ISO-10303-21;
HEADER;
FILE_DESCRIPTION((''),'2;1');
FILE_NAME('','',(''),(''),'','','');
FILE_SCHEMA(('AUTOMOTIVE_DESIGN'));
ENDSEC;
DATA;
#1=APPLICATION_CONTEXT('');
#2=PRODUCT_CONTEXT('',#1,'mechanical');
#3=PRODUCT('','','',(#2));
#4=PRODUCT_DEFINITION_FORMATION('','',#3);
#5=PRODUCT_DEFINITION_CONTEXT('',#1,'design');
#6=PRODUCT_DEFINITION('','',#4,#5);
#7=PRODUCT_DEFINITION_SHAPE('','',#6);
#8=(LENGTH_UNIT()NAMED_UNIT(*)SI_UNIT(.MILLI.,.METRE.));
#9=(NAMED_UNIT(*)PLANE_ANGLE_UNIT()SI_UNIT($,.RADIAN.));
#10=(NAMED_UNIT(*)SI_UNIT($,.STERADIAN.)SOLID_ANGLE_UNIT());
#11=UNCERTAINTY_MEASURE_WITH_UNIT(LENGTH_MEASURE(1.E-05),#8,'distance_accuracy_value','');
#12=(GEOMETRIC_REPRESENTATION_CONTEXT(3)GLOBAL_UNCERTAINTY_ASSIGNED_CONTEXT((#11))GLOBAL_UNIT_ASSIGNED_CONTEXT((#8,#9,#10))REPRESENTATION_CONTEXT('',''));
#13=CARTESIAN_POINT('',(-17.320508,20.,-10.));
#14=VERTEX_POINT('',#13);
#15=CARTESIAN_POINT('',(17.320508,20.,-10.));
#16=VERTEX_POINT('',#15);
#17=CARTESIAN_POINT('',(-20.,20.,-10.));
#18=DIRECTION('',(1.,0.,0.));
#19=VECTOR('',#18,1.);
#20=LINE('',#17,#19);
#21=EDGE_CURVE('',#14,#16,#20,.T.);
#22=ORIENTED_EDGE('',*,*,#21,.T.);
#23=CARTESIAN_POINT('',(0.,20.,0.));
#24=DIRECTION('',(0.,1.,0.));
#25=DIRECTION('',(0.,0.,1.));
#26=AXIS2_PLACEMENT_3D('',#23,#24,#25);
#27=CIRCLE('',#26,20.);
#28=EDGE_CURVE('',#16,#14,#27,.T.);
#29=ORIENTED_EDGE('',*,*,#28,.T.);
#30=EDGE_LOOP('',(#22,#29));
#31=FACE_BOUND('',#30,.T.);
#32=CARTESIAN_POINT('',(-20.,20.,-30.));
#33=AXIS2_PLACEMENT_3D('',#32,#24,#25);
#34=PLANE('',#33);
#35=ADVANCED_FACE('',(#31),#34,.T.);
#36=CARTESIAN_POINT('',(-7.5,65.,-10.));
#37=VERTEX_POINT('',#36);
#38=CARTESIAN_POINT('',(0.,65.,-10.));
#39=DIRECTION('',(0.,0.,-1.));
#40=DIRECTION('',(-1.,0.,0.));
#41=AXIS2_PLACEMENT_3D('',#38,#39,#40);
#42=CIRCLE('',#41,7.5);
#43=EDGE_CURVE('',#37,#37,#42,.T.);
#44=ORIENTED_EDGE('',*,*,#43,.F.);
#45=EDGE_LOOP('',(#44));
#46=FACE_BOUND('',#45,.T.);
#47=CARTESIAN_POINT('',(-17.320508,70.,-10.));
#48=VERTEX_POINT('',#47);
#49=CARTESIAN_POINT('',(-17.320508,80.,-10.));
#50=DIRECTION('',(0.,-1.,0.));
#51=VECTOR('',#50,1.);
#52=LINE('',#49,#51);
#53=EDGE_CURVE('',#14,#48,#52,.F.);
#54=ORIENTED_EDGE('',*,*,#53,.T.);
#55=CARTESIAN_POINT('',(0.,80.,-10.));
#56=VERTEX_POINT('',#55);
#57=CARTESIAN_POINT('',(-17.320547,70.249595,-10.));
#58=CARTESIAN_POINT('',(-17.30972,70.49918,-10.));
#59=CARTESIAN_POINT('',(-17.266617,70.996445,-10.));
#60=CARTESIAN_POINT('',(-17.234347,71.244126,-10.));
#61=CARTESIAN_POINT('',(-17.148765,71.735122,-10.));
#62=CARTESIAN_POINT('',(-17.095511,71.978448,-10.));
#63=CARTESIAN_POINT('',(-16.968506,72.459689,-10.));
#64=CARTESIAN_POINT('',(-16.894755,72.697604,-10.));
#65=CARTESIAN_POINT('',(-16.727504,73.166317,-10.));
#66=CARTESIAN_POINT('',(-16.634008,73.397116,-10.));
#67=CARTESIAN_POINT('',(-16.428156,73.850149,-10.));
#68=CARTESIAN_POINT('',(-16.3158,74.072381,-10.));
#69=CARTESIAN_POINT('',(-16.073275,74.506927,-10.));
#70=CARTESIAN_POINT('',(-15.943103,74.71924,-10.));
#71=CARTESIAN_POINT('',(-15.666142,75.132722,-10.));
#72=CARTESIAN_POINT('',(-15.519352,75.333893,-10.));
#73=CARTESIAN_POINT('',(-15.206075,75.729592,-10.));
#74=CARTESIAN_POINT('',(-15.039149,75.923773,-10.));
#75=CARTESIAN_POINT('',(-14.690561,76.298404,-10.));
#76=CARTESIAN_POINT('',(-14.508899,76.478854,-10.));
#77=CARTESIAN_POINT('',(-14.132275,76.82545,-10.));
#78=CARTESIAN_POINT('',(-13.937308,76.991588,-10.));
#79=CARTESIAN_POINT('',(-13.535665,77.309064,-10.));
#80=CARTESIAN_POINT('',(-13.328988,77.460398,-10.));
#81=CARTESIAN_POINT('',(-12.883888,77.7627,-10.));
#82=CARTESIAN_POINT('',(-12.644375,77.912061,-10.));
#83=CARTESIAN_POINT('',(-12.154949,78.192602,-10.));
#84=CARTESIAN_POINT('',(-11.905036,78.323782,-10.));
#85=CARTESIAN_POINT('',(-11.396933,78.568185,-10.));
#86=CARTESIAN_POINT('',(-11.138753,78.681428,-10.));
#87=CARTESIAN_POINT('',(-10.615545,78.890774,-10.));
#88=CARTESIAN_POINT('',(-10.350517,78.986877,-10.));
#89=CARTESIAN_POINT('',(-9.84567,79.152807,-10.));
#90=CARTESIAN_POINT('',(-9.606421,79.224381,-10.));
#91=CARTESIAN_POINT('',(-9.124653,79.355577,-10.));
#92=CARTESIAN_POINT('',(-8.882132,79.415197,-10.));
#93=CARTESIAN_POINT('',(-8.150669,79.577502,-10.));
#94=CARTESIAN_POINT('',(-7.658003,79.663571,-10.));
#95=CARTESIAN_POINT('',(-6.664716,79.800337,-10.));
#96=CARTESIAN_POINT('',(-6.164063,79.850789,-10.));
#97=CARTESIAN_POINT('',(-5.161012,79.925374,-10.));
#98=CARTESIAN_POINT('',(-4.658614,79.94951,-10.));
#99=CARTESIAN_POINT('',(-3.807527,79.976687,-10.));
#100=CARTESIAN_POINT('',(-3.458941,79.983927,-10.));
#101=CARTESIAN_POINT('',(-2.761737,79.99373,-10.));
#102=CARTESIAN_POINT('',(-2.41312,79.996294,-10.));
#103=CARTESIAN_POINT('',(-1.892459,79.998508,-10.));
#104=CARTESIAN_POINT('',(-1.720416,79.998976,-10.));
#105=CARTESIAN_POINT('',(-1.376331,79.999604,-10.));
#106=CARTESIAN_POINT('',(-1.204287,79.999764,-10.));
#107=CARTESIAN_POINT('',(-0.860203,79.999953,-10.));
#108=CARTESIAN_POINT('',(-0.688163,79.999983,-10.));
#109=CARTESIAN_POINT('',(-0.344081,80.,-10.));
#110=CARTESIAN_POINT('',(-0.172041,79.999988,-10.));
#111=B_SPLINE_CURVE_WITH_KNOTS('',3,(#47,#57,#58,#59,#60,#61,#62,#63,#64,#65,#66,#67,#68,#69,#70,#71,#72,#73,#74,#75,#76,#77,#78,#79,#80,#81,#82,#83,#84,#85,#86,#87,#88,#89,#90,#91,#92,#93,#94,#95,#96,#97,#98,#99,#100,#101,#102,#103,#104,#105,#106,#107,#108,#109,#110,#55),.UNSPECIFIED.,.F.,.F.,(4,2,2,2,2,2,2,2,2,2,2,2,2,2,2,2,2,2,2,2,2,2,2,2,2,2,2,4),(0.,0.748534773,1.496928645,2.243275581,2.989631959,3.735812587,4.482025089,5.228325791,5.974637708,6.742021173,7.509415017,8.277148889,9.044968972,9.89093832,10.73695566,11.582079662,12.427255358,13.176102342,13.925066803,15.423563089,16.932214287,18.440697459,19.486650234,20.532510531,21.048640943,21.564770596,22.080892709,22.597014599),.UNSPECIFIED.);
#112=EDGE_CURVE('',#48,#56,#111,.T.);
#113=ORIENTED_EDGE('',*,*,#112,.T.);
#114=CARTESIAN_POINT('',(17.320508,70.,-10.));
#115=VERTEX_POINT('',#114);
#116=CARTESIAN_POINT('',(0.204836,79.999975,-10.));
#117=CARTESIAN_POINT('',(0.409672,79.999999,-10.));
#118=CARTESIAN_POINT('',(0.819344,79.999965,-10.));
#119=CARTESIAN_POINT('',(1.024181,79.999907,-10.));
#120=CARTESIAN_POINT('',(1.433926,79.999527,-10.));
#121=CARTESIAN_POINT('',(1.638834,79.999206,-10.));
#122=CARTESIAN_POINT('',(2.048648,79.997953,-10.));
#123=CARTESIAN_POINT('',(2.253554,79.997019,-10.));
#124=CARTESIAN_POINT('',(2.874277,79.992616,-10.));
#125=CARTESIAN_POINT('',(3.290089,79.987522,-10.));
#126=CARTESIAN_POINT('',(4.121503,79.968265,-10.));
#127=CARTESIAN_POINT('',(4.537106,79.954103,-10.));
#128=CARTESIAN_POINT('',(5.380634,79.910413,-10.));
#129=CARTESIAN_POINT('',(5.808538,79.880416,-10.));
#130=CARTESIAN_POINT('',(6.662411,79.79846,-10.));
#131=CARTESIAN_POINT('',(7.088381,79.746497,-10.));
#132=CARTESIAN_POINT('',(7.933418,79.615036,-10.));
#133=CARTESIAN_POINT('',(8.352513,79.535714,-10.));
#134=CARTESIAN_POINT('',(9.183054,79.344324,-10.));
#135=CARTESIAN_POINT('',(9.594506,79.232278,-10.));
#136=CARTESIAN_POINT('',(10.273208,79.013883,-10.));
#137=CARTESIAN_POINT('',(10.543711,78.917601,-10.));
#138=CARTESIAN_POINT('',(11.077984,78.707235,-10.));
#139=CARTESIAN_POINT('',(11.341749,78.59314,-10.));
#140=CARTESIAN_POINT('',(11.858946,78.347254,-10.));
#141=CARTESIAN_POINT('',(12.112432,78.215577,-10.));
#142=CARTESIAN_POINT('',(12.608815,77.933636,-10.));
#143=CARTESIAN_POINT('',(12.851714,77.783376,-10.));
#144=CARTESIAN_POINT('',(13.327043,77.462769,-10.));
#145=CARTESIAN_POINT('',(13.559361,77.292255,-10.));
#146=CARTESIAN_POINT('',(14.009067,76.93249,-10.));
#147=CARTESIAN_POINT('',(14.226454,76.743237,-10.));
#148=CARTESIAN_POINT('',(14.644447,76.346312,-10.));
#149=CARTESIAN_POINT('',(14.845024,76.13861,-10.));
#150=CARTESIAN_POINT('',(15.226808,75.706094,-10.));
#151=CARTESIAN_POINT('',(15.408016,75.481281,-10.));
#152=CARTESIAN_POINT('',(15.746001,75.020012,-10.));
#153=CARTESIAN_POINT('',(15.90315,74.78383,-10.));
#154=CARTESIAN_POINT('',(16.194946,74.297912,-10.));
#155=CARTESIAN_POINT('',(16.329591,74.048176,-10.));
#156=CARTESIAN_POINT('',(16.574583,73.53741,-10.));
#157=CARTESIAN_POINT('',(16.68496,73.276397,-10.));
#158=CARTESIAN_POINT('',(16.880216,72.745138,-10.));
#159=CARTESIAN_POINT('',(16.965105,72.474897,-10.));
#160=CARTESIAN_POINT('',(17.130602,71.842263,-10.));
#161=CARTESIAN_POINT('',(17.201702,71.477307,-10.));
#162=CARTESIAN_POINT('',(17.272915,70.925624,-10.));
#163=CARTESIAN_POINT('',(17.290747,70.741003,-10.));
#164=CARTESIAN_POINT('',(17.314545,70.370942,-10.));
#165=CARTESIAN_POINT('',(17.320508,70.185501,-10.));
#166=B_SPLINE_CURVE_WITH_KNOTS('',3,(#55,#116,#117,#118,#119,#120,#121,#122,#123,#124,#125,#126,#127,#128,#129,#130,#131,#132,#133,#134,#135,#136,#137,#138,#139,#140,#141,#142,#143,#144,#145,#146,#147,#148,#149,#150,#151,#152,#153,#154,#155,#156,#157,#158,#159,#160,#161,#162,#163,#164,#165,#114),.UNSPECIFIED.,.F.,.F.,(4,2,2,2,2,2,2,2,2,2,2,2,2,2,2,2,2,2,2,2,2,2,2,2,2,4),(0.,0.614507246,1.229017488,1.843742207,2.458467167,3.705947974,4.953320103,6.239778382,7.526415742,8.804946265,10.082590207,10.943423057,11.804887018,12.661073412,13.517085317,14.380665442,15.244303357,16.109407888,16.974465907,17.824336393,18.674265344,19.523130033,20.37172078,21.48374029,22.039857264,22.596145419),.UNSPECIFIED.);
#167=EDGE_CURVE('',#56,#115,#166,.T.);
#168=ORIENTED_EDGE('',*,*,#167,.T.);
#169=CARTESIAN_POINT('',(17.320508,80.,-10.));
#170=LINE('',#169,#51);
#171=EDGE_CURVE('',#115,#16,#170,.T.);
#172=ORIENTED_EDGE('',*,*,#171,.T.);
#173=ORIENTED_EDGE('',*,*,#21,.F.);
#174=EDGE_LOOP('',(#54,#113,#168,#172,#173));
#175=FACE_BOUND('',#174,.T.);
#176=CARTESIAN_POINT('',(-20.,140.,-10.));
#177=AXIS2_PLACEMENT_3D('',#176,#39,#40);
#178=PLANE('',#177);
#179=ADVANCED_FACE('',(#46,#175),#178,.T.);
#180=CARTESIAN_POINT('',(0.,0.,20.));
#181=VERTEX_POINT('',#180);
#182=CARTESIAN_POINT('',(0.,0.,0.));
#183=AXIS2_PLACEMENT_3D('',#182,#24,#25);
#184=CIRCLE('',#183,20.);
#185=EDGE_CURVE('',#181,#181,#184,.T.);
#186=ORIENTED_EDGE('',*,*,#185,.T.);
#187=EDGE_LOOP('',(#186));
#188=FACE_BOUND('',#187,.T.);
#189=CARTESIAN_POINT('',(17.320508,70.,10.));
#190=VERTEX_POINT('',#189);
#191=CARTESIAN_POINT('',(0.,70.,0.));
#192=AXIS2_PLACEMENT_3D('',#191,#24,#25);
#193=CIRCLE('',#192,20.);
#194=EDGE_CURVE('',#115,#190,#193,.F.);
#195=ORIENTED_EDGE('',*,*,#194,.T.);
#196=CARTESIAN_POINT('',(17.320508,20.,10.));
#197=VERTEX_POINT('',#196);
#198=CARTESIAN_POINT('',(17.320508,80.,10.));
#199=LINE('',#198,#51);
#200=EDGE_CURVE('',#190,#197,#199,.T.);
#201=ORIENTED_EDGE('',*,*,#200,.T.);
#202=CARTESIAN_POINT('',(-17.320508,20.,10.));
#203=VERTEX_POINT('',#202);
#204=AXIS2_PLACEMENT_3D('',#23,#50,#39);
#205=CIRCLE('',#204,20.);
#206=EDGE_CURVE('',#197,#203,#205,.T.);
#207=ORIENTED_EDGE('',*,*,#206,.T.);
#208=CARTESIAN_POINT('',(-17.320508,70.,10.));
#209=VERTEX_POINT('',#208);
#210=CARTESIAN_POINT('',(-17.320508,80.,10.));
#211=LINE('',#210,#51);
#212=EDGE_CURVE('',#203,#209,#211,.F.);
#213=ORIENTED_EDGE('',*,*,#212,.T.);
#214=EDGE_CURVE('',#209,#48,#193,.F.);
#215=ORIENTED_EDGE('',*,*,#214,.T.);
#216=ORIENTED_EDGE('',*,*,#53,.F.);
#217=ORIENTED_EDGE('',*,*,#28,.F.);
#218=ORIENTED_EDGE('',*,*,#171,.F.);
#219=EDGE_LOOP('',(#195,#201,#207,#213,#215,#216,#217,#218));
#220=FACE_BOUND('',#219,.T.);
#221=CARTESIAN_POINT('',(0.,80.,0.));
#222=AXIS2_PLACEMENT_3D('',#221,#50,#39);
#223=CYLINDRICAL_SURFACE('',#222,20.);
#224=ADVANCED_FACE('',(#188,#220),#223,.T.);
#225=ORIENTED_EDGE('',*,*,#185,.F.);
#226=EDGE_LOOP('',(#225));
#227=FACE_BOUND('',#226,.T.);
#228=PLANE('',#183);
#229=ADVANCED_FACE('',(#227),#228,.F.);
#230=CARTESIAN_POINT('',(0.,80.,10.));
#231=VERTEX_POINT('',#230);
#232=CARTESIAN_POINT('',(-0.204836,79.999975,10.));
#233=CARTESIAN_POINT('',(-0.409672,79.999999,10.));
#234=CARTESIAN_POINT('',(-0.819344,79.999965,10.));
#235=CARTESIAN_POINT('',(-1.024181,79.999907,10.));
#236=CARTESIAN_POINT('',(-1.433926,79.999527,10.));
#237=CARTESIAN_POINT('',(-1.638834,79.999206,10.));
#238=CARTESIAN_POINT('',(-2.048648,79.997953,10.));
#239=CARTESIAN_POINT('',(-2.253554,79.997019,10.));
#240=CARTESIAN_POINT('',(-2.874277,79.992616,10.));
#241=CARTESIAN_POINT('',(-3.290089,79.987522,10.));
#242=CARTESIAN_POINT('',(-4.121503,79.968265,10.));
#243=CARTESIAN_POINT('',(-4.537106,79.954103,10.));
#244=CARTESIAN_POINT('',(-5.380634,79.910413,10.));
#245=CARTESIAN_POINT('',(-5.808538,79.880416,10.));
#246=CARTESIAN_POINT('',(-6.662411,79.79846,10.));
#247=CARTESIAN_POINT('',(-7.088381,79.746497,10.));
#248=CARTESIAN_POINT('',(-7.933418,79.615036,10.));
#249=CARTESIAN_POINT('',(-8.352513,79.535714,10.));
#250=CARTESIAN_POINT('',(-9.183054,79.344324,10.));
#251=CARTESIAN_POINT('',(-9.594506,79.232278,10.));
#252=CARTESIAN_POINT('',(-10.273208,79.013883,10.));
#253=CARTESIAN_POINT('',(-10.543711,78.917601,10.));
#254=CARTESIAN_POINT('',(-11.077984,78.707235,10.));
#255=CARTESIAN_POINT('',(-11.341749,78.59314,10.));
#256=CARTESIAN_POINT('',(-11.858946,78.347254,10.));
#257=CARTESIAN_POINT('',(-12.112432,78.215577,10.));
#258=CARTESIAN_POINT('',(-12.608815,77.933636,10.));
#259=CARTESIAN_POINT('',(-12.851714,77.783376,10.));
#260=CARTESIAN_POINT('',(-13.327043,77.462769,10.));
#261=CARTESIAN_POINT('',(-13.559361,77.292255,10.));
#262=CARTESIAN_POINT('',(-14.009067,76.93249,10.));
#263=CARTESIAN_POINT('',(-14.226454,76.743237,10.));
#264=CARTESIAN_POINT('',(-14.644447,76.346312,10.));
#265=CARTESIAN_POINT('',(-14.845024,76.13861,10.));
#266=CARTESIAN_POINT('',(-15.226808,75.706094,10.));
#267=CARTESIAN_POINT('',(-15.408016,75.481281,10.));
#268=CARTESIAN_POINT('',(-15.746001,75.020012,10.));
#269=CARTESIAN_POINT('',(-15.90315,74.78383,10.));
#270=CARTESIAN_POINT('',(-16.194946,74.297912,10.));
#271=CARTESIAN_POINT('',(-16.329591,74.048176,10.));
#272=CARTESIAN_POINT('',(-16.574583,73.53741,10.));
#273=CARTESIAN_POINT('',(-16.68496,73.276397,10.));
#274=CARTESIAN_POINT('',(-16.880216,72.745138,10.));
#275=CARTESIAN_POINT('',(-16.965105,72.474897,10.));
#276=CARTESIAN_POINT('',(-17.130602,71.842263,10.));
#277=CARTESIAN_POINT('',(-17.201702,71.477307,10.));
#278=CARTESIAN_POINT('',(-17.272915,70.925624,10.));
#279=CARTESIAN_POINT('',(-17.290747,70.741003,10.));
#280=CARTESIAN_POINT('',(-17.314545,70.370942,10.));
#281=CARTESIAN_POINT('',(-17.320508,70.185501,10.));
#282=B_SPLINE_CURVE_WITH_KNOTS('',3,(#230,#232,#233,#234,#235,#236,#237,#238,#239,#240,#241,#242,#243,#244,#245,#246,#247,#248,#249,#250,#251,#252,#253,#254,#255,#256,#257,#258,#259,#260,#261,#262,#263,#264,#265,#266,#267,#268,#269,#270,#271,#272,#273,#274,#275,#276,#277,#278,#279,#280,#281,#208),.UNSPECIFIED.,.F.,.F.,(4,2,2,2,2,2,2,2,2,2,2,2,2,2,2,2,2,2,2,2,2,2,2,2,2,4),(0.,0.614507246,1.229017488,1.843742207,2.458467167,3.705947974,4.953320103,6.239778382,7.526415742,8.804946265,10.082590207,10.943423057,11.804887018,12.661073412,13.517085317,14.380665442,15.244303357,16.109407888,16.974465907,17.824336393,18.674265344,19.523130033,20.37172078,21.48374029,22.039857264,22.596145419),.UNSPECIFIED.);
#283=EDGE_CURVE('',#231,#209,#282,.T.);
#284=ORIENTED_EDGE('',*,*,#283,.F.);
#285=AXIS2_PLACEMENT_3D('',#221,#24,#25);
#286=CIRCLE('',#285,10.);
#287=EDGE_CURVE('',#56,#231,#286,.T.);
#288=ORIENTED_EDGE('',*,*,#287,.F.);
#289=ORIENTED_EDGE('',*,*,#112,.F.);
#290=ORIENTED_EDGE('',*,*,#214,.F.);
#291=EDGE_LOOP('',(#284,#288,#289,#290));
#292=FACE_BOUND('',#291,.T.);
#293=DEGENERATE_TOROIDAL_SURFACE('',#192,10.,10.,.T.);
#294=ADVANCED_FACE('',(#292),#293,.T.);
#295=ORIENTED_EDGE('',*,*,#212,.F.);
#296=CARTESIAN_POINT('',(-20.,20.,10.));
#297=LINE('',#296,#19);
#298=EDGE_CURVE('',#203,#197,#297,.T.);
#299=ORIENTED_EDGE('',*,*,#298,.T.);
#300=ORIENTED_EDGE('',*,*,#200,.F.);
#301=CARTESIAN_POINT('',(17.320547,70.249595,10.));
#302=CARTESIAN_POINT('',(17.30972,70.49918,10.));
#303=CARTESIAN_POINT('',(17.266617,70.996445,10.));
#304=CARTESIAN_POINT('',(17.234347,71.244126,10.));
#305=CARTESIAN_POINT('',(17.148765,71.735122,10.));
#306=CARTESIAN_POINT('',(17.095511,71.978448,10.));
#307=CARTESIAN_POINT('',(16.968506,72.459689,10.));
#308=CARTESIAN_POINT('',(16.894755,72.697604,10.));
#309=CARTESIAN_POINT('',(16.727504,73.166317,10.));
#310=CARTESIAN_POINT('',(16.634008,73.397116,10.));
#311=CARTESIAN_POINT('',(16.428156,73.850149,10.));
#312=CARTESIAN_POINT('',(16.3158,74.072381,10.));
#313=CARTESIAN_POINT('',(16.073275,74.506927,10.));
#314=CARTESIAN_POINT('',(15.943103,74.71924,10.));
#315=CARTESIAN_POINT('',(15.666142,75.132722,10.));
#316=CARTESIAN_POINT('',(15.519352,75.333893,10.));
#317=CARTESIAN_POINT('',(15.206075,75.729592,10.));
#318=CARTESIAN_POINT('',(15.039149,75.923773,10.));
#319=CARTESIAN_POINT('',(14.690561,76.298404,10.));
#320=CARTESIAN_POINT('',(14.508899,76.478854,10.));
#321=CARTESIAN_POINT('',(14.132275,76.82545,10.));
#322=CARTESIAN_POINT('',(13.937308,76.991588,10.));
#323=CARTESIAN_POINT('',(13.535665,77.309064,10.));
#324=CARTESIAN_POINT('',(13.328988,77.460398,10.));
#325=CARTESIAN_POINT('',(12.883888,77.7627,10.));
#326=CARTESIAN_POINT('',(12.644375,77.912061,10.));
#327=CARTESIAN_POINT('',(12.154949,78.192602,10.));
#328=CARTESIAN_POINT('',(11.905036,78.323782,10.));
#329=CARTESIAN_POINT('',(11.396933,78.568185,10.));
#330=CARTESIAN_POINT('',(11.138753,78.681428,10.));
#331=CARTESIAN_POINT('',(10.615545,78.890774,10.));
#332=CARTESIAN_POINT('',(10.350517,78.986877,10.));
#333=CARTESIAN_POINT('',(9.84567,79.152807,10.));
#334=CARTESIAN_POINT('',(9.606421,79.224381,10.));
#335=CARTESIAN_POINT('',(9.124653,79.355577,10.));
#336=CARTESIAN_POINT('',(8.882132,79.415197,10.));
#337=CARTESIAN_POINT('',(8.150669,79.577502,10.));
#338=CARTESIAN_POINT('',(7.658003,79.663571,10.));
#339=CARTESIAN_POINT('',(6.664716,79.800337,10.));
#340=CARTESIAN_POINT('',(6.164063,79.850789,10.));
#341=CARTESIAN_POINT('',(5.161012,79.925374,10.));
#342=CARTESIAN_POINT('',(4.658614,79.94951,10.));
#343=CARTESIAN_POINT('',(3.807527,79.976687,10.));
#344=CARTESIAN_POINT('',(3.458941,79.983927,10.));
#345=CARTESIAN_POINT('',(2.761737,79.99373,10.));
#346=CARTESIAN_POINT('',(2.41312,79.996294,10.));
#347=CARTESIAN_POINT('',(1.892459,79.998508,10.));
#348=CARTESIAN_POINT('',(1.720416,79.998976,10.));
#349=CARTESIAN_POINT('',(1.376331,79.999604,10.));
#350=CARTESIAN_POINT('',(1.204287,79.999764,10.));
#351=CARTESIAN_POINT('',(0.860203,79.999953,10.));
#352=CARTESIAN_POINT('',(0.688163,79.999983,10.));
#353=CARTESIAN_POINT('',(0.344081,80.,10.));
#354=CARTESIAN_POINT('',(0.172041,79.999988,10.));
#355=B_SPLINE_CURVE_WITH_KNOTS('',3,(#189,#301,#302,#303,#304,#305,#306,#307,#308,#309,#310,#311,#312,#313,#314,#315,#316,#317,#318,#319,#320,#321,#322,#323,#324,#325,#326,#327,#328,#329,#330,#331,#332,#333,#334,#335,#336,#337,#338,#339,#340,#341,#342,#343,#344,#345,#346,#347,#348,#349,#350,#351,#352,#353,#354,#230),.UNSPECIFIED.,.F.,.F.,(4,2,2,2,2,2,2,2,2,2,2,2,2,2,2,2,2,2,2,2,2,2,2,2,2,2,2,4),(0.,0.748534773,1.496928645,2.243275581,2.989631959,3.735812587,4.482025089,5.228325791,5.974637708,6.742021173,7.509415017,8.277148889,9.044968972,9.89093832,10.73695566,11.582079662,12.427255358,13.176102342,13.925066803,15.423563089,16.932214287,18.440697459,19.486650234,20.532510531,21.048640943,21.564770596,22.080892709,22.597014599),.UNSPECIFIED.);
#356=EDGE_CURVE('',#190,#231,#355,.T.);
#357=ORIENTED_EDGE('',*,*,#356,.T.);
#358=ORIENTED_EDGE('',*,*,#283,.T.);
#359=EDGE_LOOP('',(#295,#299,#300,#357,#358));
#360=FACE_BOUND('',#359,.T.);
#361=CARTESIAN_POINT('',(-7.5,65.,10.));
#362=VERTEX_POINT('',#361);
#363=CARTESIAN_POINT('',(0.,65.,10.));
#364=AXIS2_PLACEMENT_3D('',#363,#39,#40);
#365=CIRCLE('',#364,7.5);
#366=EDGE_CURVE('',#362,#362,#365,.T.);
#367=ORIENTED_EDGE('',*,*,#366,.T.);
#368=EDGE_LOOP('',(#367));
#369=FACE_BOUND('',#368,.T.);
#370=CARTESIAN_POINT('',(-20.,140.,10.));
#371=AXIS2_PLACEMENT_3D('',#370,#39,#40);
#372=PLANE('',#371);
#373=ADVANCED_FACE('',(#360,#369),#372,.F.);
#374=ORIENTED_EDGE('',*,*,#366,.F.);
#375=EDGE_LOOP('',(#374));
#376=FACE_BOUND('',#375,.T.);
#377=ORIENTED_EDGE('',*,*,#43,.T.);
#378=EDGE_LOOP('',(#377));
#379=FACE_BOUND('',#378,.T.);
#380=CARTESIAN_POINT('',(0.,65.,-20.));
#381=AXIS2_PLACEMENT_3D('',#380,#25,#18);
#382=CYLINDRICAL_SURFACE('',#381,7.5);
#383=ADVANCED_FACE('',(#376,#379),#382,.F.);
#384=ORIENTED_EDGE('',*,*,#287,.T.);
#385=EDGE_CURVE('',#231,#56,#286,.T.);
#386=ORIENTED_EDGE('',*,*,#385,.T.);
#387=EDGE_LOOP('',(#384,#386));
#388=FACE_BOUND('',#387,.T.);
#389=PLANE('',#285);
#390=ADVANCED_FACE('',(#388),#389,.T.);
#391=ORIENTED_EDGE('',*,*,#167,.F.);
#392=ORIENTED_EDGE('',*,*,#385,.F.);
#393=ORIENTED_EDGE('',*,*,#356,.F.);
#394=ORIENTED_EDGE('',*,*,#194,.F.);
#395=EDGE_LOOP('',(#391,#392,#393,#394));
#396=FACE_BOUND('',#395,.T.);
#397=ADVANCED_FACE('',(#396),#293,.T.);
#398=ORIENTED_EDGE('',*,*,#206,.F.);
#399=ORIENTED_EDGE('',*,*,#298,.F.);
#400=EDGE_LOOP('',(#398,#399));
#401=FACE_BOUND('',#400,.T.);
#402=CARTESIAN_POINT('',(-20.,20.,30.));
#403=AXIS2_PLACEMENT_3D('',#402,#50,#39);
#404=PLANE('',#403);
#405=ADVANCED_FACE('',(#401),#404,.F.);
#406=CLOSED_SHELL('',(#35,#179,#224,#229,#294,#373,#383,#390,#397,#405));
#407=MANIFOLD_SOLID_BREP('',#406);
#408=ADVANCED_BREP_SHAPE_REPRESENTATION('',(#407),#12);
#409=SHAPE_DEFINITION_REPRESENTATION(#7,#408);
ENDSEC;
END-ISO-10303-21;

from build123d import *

# Parameters (mm, degrees)
SKETCH1_R               = 20
BOSS_EXTRUDE1_DEPTH     = 80
SKETCH2_W               = 20
SKETCH2_H               = 120
CUT_EXTRUDE1_DEPTH      = 85.852813742
FILLET1_R               = 10
CUT_EXTRUDE2_DEPTH      = 85.85281386
CUT_EXTRUDE2_DEPTH_BACK = 85.85281386
SKETCH3_R               = 7.5


with BuildPart() as part:
    # Sketch1 → Boss-Extrude1 (new body)
    with BuildSketch(Plane(origin=(0, 0, 0), x_dir=(1, 0, 0), z_dir=(0, 1, 0))):
        with Locations(Location((0, 0, 0), (0, 0, 270))):
            Circle(SKETCH1_R)
    extrude(amount=BOSS_EXTRUDE1_DEPTH)

    # Sketch2 → Cut-Extrude1 (cut, symmetric)
    with BuildSketch(Plane(origin=(0, 0, 0), x_dir=(0, 0, -1), z_dir=(1, 0, 0))):
        with Locations((-20, 80)):
            Rectangle(SKETCH2_W, SKETCH2_H)
    cut_extrude1 = extrude(amount=CUT_EXTRUDE1_DEPTH, both=True, mode=Mode.SUBTRACT)

    # Mirror1: Cut-Extrude1 across plane
    add(cut_extrude1.mirror(Plane.XY), mode=Mode.SUBTRACT)

    # Fillet1
    fillet1_edges = [part.edges().sort_by_distance(p)[0] for p in [
        (20, 80, 0),
        (-20, 80, 0),
    ]]
    fillet(fillet1_edges, radius=FILLET1_R - 0.0001)  # a hair under: the kernel refuses the full size

    # Sketch3 → Cut-Extrude2 (cut, two sides: drawn at the far end of the back side and taken through both)
    with BuildSketch(Plane.XY.offset(-CUT_EXTRUDE2_DEPTH_BACK)):
        with Locations(Location((0, 65, 0), (0, 0, 180))):
            Circle(SKETCH3_R)
    extrude(amount=CUT_EXTRUDE2_DEPTH + CUT_EXTRUDE2_DEPTH_BACK, mode=Mode.SUBTRACT)


solid = part.part
